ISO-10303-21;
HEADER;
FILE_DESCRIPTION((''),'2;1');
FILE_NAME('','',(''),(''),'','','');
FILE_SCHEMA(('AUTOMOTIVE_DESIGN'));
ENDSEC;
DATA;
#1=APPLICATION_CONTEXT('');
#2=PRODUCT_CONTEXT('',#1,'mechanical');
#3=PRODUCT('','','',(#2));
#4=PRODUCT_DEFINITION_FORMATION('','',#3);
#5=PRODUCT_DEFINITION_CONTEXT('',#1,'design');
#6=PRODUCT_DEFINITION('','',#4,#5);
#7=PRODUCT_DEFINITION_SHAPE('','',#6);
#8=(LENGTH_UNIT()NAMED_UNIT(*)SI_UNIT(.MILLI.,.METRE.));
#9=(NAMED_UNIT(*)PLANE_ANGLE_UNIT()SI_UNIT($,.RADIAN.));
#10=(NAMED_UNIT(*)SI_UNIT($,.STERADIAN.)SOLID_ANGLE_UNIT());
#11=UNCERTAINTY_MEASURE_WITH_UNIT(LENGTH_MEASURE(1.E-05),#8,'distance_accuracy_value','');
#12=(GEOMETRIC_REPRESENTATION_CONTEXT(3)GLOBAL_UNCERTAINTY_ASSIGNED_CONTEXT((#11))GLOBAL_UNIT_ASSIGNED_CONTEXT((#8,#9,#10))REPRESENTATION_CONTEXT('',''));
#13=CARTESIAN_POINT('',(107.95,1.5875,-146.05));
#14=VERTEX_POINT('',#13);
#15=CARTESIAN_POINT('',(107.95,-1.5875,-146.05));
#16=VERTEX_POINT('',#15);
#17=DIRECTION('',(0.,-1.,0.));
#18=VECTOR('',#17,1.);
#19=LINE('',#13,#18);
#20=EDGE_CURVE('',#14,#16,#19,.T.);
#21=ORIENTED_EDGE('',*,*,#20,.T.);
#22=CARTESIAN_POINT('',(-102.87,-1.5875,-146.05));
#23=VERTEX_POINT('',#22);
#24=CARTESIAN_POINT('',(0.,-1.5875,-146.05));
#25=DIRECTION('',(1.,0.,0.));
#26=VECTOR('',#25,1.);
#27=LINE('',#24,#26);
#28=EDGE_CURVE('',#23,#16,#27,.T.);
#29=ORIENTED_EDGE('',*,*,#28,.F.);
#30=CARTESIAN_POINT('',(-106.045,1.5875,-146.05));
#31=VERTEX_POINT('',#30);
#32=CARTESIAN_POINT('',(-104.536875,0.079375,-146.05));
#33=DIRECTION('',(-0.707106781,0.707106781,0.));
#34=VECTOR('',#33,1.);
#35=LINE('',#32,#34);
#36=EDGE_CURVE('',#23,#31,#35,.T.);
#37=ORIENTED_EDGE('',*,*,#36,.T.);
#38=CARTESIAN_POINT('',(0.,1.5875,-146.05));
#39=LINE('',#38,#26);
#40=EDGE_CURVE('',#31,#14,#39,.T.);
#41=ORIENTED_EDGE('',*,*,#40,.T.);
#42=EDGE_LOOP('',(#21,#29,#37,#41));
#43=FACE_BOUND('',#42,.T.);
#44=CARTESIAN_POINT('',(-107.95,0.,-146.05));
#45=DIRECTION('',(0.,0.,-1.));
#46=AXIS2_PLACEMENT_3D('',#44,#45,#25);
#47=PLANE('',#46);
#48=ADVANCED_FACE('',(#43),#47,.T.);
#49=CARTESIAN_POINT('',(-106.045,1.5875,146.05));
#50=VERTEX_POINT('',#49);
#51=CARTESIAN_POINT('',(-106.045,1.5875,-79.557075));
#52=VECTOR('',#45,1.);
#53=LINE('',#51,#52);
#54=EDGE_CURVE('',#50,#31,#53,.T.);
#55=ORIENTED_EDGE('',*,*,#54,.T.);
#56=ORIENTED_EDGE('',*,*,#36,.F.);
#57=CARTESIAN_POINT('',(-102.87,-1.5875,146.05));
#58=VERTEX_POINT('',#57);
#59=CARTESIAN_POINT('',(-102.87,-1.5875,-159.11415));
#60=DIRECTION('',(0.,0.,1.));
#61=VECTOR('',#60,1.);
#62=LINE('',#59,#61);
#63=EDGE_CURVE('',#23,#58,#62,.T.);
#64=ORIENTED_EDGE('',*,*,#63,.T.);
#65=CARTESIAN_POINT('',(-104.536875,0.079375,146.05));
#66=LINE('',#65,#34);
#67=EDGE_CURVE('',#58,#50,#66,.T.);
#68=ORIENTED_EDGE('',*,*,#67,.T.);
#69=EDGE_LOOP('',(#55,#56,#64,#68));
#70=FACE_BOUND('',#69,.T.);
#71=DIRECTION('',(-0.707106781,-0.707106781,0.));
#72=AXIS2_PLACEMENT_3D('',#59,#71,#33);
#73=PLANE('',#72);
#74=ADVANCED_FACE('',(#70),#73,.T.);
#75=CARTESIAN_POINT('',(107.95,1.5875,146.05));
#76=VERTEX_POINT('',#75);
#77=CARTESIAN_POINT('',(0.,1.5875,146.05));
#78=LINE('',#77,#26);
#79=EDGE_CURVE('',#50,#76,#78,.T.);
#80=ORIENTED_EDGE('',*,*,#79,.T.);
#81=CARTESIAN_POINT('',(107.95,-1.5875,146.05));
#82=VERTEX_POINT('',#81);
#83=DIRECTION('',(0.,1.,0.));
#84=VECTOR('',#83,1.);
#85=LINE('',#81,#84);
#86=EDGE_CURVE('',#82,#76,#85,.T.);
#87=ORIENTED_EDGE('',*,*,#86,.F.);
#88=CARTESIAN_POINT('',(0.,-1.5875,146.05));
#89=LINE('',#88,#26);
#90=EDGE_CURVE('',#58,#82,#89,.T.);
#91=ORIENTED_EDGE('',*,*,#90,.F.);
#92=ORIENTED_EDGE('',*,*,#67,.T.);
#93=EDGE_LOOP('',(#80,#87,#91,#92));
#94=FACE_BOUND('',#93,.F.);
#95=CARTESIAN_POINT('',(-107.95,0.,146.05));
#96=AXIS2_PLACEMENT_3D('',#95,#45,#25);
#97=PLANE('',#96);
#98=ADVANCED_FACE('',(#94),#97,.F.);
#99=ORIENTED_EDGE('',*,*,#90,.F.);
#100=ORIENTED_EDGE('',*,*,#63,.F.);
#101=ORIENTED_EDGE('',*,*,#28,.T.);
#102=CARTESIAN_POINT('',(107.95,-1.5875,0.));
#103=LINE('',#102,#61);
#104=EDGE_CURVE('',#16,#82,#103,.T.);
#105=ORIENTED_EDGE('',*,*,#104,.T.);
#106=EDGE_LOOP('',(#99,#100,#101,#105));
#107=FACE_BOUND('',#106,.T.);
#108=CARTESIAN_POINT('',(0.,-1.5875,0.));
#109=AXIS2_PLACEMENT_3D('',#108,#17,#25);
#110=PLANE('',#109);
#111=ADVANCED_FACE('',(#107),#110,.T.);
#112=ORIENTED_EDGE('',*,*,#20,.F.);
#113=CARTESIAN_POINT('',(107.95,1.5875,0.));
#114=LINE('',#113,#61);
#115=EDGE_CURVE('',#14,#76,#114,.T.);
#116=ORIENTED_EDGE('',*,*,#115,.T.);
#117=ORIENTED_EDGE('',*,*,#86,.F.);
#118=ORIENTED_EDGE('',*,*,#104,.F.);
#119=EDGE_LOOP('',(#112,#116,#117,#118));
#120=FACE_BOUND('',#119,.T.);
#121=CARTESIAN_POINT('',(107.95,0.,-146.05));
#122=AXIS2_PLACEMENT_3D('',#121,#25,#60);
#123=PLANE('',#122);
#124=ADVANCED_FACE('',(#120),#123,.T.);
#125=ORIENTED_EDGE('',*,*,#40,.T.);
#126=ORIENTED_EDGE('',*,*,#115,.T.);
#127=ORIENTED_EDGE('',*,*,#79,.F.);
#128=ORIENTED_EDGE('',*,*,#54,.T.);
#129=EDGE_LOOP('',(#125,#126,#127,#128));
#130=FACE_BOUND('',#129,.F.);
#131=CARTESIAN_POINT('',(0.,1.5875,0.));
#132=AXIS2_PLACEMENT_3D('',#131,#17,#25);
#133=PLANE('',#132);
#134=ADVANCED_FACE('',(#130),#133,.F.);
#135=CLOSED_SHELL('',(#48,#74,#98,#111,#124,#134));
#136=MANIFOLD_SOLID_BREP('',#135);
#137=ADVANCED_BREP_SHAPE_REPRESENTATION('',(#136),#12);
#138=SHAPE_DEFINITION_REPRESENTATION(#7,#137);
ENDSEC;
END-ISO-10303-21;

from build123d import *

# Parameters (mm, degrees)
F0_W        = 215.9
F0_H        = 292.1
F1_DEPTH    = 1.5875
F2_T1_DEPTH = 318.2282991577


# Not quite as in the source:
# - a fillet or chamfer that OpenCascade refuses, or shapes differently, is made with other operations: its cross-section is extruded or revolved along the edge and cut away or added


with BuildPart() as f1:
    # F0 (on Front) → F1 (new body, symmetric)
    with BuildSketch(Plane.XZ):
        Rectangle(F0_W, F0_H)
    extrude(amount=F1_DEPTH, both=True)

    # F2: chamfer of 5.08 on 1 edges, made by hand

    # F2_s2 → F2_t1 (cut)
    with BuildSketch(Plane.XY.offset(-159.1141495789)):
        Polygon((-102.87, -1.5875), (-107.95, 3.4925), (-107.95, -1.5875), align=None)
    extrude(amount=F2_T1_DEPTH, mode=Mode.SUBTRACT)


solid = f1.part
